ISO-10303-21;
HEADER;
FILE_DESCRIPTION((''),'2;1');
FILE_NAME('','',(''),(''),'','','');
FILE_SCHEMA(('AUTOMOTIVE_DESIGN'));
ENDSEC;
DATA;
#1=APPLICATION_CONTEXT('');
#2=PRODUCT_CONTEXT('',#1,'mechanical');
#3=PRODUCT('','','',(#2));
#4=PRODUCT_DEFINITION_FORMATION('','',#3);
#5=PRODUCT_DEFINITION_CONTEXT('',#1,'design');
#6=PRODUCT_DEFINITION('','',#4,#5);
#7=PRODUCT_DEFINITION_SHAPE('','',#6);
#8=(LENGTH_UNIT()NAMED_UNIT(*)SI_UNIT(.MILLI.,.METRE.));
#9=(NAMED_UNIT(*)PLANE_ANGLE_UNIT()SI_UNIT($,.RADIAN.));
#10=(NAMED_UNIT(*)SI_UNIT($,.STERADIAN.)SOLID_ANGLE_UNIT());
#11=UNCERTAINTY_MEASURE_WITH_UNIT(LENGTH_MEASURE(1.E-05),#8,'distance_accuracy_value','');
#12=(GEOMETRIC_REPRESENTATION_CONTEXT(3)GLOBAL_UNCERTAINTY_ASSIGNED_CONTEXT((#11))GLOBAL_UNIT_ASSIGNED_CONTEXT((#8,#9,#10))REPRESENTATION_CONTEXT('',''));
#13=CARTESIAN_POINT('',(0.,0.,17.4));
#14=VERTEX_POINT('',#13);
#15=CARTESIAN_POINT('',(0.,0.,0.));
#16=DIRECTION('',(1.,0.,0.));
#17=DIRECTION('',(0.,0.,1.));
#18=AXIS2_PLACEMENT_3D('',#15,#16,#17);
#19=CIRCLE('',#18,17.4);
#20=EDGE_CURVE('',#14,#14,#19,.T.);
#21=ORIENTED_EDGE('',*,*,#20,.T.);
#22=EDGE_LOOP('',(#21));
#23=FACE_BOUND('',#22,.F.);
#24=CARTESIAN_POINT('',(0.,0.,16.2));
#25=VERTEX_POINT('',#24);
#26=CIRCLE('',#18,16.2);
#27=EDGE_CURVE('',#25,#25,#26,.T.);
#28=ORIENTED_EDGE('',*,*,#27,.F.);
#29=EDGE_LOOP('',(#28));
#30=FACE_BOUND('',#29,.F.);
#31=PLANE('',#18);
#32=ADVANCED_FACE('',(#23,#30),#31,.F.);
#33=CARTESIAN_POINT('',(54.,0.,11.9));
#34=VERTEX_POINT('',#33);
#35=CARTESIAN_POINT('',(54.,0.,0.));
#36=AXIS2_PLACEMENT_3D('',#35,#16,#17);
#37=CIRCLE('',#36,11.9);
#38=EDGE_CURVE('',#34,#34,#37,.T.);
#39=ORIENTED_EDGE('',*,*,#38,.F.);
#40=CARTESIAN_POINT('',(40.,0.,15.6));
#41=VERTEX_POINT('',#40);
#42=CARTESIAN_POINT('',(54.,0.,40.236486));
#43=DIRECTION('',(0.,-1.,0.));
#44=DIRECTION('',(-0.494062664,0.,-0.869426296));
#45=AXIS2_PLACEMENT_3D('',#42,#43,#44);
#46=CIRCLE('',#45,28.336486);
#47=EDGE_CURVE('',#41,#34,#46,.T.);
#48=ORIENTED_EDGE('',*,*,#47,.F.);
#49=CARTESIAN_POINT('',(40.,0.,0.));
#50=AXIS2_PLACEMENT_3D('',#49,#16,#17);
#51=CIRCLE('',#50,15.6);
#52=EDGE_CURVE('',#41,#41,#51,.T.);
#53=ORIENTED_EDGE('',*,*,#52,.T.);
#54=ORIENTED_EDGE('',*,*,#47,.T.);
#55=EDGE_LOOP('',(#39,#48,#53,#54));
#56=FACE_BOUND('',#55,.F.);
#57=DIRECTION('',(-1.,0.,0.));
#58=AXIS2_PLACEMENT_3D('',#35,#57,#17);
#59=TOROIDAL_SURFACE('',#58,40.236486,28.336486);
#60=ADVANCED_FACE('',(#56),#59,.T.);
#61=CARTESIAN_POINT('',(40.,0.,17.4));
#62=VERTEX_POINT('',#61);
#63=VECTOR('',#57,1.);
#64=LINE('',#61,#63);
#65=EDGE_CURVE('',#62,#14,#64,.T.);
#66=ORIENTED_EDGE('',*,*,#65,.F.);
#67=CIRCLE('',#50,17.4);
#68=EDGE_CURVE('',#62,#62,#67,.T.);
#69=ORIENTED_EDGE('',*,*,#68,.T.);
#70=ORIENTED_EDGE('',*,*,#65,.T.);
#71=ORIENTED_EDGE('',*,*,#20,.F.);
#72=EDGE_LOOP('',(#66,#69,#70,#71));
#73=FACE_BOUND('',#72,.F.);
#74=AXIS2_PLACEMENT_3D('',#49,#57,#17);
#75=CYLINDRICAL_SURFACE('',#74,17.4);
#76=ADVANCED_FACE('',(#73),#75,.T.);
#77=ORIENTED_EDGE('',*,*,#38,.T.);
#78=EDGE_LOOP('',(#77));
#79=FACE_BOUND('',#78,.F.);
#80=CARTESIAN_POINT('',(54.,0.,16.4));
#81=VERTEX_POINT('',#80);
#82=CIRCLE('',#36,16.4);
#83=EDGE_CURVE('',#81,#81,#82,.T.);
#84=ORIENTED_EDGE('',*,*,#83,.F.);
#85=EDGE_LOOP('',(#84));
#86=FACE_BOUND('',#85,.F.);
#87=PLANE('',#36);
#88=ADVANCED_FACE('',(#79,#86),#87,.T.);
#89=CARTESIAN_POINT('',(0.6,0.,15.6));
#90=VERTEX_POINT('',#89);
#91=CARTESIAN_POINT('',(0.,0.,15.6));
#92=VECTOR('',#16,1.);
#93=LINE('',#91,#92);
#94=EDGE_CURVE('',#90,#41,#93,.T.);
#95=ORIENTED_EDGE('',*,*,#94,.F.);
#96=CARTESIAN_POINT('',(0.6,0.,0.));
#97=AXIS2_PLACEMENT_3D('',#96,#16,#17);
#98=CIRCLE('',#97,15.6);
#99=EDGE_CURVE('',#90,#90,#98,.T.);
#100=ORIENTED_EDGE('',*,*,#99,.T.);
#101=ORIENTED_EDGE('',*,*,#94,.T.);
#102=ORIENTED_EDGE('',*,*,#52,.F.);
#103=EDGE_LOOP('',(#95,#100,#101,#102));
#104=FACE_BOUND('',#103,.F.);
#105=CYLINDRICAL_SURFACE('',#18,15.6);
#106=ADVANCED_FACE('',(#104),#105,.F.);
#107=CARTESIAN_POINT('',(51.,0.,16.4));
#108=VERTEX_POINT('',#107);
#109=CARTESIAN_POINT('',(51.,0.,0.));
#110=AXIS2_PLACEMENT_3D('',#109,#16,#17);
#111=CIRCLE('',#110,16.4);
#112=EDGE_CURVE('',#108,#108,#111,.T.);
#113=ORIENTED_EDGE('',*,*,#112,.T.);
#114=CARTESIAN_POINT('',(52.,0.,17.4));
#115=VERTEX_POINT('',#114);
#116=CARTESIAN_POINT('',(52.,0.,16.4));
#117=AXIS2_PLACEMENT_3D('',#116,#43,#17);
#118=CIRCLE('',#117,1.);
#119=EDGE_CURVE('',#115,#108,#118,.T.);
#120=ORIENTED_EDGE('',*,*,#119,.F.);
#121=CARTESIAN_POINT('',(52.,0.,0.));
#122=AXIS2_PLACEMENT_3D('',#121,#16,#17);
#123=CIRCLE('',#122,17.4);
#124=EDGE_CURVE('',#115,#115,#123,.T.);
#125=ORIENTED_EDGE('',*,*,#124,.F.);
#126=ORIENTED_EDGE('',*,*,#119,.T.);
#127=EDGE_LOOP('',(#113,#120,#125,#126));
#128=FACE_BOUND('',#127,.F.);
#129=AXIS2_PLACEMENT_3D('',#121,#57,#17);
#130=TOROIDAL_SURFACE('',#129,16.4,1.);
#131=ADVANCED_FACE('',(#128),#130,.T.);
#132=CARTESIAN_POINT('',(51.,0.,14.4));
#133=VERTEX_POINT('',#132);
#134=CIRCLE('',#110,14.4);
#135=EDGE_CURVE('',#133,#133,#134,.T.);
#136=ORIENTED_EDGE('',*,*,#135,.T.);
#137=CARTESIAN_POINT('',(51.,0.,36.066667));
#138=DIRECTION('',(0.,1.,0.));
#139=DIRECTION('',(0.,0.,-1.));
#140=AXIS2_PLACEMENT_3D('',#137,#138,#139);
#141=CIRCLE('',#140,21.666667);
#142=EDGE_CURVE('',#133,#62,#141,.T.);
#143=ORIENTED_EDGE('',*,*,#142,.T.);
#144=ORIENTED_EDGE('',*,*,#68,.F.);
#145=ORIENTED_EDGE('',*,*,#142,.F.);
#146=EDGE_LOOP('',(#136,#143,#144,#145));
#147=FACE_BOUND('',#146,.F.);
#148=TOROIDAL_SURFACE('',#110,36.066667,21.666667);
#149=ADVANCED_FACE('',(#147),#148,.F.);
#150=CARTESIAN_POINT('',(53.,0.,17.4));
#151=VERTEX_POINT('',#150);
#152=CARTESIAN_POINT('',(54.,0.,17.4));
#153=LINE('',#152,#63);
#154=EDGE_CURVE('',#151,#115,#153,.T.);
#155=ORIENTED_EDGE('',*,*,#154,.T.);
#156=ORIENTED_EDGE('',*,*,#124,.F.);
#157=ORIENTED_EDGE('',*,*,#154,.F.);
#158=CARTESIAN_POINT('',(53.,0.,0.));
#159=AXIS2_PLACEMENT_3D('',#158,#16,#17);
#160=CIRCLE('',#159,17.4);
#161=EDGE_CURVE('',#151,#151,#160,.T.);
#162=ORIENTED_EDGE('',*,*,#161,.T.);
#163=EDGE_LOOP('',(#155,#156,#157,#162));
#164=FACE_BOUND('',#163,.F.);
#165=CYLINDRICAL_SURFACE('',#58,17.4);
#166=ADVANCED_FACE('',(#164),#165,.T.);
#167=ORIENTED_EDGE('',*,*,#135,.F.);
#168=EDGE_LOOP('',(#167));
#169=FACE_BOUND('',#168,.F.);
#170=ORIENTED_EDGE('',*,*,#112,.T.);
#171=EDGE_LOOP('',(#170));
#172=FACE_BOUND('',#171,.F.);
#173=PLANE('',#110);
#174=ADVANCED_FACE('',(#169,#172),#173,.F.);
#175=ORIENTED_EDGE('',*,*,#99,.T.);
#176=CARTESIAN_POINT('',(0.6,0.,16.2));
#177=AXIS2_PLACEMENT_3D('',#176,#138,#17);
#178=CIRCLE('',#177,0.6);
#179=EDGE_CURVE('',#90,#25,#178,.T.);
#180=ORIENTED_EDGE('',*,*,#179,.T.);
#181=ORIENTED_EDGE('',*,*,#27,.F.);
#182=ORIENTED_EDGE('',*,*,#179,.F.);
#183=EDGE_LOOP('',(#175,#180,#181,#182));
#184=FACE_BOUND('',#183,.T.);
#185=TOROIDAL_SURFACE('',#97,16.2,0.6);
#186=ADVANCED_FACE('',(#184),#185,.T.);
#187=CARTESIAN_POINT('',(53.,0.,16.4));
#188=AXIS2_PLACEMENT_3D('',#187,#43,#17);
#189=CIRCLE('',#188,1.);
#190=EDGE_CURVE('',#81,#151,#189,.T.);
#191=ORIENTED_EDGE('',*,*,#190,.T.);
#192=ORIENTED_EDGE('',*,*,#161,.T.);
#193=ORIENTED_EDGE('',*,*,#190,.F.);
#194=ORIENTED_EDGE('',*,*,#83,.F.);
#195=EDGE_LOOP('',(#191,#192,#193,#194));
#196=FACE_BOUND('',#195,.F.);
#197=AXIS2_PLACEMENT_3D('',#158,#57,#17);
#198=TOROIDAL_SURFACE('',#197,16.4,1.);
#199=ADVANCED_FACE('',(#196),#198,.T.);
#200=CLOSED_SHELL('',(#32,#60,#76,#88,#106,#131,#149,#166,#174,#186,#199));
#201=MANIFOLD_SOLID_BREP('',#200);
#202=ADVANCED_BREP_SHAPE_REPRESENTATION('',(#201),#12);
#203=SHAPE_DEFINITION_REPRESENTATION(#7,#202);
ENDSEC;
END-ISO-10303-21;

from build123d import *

# Parameters (mm, degrees)
F2_R = 1
F3_R = 0.6


# Not quite as in the source:
# - a feature names something its author has since deleted; it is built from what else it names


with BuildPart() as f1:
    # F0 (on Front) → F1 (revolve)
    with BuildSketch(Plane.XZ):
        with BuildLine():
            Line((40, 17.4), (11.5, 17.4))
            Line((11.5, 17.4), (0, 17.4))
            Line((0, 17.4), (0, 15.6))
            Line((0, 15.6), (40, 15.6))
            ThreePointArc((40, 15.6), (46.7596616101, 12.8406114977), (54, 11.9))
            Line((54, 11.9), (54, 17.4))
            Line((54, 17.4), (51, 17.4))
            Line((51, 17.4), (51, 14.4))
            ThreePointArc((51, 14.4), (45.2991228745, 15.1634505398), (40, 17.4))
        make_face()
    revolve(axis=Axis((27, 0, 0), (1, 0, 0)))

    # F2
    f2_edges = [f1.edges().sort_by_distance(p)[0] for p in [
        (54, 0, -17.4),
        (51, 0, -17.4),
    ]]
    fillet(f2_edges, radius=F2_R)

    # F3
    f3_edges = [f1.edges().sort_by_distance(p)[0] for p in [
        (0, 0, -15.6),
    ]]
    fillet(f3_edges, radius=F3_R)


solid = f1.part
